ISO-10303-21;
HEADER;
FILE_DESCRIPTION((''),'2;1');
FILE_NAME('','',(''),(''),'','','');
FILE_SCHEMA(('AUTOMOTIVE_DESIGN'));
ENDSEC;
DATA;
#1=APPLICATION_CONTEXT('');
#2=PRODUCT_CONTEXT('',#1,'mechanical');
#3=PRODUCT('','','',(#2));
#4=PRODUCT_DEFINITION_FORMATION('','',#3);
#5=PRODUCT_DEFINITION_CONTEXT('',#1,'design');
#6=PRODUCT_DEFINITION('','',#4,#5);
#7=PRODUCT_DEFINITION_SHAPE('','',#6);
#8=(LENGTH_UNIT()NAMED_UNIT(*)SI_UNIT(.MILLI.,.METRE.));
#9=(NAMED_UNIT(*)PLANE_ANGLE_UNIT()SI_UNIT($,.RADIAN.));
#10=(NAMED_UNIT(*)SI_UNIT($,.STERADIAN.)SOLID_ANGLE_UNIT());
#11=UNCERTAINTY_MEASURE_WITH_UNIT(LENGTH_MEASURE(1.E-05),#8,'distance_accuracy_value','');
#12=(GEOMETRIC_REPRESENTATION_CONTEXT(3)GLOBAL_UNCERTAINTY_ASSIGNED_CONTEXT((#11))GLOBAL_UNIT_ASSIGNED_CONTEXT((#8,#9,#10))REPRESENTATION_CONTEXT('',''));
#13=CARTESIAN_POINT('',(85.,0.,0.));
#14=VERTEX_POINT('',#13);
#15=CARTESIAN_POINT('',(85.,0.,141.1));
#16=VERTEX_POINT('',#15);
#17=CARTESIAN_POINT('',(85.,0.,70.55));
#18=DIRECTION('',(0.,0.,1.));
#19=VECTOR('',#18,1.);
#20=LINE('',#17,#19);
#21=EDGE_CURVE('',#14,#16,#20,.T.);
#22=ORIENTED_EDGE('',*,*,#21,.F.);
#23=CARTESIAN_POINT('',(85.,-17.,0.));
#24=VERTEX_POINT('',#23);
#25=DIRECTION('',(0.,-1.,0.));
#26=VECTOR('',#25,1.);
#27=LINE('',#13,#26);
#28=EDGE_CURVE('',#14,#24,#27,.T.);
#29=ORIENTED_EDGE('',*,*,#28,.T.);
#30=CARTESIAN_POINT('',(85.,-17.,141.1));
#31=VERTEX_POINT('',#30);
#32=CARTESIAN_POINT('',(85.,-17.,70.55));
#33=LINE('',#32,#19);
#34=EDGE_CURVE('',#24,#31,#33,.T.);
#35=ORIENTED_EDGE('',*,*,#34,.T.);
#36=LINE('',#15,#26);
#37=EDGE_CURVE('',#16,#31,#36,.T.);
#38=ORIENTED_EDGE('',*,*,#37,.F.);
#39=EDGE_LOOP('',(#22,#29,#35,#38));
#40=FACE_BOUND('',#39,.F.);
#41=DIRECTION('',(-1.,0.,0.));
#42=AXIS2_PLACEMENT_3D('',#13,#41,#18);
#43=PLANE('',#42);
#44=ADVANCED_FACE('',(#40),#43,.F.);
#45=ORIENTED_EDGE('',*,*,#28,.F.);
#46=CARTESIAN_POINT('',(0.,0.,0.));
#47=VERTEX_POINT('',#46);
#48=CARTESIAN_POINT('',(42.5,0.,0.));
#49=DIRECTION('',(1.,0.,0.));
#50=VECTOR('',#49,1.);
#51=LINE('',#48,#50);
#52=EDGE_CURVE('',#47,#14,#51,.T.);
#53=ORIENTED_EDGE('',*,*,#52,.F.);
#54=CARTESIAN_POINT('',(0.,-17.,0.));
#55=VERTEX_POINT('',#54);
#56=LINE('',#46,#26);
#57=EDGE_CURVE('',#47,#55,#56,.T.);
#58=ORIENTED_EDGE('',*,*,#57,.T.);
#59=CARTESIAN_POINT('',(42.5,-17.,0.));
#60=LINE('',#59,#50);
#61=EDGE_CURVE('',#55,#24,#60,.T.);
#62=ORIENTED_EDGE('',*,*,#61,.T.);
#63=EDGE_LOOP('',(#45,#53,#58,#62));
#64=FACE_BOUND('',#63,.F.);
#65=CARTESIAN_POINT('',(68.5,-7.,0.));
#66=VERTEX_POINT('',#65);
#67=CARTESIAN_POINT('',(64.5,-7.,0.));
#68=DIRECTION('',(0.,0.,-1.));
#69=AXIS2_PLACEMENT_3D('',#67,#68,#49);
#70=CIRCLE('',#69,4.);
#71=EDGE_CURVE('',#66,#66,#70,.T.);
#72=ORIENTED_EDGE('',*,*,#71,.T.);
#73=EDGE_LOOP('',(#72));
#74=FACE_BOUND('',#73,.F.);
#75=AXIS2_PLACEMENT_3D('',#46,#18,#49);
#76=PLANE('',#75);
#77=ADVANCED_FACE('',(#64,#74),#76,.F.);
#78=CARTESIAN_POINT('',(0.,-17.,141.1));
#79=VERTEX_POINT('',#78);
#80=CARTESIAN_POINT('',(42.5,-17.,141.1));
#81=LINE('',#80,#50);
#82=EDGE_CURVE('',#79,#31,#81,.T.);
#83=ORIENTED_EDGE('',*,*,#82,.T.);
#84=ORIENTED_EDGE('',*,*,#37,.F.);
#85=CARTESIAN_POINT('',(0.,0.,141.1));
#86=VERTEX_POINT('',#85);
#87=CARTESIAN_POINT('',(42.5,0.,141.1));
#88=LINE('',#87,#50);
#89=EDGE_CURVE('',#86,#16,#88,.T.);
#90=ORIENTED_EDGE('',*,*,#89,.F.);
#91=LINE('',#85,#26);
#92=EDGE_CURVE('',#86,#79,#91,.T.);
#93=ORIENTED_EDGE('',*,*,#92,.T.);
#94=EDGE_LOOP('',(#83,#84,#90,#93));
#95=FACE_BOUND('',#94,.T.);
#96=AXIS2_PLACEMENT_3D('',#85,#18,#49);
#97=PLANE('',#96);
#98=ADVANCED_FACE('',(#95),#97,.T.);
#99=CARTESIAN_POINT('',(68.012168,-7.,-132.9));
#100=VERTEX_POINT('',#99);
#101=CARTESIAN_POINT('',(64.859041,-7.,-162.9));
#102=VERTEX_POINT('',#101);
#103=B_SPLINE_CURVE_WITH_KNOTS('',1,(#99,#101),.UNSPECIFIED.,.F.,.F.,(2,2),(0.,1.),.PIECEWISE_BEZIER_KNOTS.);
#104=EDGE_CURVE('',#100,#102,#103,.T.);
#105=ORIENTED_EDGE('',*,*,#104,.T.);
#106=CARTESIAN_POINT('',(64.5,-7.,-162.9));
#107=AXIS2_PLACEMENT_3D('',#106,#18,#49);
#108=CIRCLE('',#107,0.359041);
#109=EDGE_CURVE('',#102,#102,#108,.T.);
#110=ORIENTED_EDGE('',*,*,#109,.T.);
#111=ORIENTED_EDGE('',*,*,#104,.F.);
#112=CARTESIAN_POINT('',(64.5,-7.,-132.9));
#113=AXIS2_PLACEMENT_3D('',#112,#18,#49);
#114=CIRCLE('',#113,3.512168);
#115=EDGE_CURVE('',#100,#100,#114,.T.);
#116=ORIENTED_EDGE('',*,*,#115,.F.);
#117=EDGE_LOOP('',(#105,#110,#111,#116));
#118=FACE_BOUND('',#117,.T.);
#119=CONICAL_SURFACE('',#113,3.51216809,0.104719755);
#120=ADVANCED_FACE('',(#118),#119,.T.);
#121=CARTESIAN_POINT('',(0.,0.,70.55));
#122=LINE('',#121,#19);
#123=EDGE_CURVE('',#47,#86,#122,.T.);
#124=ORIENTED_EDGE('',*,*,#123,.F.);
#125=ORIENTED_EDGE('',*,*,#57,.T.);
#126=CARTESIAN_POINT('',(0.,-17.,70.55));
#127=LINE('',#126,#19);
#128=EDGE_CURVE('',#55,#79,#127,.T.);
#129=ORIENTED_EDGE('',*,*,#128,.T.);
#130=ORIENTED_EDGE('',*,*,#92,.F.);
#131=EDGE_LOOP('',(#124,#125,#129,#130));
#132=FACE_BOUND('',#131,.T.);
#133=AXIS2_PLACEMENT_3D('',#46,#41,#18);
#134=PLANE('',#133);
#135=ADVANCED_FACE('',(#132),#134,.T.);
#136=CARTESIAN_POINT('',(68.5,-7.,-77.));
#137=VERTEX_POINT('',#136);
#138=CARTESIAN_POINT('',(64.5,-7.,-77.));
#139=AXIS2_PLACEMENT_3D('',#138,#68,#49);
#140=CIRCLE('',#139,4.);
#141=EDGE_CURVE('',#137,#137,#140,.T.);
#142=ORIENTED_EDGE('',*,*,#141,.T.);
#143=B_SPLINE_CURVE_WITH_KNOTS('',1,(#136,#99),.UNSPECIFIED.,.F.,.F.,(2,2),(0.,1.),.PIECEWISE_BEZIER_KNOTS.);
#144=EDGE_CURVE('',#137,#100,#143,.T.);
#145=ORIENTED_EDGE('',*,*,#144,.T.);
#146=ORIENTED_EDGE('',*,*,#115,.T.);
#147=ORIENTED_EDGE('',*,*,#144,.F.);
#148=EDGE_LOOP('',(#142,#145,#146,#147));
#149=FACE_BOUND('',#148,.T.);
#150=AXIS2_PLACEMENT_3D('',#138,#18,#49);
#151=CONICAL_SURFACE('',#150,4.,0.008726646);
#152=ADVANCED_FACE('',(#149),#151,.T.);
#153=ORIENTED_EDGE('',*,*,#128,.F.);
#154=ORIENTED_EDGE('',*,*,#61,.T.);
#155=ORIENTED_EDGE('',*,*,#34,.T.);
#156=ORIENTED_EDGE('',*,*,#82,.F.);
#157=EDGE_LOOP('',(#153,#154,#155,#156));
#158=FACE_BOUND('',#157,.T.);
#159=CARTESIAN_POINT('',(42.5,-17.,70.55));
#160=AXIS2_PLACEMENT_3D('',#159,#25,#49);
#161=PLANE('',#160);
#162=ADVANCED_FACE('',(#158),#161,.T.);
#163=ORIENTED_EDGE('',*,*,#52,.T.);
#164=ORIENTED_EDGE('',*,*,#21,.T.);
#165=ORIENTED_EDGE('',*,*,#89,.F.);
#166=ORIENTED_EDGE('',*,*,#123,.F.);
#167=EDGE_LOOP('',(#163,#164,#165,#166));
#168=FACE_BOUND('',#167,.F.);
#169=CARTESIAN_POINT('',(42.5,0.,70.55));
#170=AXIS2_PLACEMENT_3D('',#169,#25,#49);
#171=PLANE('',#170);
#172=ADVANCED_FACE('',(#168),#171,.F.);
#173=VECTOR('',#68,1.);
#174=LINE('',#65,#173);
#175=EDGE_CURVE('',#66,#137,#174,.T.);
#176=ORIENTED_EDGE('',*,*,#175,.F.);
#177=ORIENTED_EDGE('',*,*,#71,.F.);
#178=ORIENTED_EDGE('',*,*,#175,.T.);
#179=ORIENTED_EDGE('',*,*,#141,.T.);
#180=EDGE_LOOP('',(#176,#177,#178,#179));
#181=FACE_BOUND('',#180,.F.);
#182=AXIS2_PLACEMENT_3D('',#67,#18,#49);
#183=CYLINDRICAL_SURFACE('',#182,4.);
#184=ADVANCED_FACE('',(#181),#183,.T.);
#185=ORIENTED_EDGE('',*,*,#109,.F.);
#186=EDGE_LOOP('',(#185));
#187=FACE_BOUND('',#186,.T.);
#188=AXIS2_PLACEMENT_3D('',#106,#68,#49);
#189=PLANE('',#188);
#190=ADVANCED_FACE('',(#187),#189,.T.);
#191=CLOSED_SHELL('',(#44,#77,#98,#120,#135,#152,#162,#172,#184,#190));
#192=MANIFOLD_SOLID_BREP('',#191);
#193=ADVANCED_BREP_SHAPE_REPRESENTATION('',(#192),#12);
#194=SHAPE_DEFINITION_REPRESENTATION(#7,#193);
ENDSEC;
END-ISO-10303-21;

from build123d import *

# Parameters (mm, degrees)
F0_W     = 85
F0_H     = 141.1
F1_DEPTH = 17
F2_R     = 4
F3_DEPTH = 77
F4_R     = 4
F5_DEPTH = 55.9
F5_TAPER = 0.5
F6_R     = 3.5121680905
F7_DEPTH = 30
F7_TAPER = 6


with BuildPart() as f1:
    # F0 (on Front) → F1 (new body)
    with BuildSketch(Plane.XZ):
        with Locations((42.5, 70.55)):
            Rectangle(F0_W, F0_H)
    extrude(amount=F1_DEPTH)

    # F2 (on face) → F3 (join)
    with BuildSketch(Plane(origin=(0, 0, 0), x_dir=(1, 0, 0), z_dir=(0, 0, -1))):
        with Locations((64.5, 7)):
            Circle(F2_R)
    extrude(amount=F3_DEPTH)

    # F4 (on face) → F5 (join)
    with BuildSketch(Plane(origin=(0, 0, -77), x_dir=(1, 0, 0), z_dir=(0, 0, -1))):
        with Locations((64.5, 7)):
            Circle(F4_R)
    extrude(amount=F5_DEPTH, taper=F5_TAPER)

    # F6 (on face) → F7 (join)
    with BuildSketch(Plane(origin=(0, 0, -132.9), x_dir=(1, 0, 0), z_dir=(0, 0, -1))):
        with Locations((64.5, 7)):
            Circle(F6_R)
    extrude(amount=F7_DEPTH, taper=F7_TAPER)


solid = f1.part
